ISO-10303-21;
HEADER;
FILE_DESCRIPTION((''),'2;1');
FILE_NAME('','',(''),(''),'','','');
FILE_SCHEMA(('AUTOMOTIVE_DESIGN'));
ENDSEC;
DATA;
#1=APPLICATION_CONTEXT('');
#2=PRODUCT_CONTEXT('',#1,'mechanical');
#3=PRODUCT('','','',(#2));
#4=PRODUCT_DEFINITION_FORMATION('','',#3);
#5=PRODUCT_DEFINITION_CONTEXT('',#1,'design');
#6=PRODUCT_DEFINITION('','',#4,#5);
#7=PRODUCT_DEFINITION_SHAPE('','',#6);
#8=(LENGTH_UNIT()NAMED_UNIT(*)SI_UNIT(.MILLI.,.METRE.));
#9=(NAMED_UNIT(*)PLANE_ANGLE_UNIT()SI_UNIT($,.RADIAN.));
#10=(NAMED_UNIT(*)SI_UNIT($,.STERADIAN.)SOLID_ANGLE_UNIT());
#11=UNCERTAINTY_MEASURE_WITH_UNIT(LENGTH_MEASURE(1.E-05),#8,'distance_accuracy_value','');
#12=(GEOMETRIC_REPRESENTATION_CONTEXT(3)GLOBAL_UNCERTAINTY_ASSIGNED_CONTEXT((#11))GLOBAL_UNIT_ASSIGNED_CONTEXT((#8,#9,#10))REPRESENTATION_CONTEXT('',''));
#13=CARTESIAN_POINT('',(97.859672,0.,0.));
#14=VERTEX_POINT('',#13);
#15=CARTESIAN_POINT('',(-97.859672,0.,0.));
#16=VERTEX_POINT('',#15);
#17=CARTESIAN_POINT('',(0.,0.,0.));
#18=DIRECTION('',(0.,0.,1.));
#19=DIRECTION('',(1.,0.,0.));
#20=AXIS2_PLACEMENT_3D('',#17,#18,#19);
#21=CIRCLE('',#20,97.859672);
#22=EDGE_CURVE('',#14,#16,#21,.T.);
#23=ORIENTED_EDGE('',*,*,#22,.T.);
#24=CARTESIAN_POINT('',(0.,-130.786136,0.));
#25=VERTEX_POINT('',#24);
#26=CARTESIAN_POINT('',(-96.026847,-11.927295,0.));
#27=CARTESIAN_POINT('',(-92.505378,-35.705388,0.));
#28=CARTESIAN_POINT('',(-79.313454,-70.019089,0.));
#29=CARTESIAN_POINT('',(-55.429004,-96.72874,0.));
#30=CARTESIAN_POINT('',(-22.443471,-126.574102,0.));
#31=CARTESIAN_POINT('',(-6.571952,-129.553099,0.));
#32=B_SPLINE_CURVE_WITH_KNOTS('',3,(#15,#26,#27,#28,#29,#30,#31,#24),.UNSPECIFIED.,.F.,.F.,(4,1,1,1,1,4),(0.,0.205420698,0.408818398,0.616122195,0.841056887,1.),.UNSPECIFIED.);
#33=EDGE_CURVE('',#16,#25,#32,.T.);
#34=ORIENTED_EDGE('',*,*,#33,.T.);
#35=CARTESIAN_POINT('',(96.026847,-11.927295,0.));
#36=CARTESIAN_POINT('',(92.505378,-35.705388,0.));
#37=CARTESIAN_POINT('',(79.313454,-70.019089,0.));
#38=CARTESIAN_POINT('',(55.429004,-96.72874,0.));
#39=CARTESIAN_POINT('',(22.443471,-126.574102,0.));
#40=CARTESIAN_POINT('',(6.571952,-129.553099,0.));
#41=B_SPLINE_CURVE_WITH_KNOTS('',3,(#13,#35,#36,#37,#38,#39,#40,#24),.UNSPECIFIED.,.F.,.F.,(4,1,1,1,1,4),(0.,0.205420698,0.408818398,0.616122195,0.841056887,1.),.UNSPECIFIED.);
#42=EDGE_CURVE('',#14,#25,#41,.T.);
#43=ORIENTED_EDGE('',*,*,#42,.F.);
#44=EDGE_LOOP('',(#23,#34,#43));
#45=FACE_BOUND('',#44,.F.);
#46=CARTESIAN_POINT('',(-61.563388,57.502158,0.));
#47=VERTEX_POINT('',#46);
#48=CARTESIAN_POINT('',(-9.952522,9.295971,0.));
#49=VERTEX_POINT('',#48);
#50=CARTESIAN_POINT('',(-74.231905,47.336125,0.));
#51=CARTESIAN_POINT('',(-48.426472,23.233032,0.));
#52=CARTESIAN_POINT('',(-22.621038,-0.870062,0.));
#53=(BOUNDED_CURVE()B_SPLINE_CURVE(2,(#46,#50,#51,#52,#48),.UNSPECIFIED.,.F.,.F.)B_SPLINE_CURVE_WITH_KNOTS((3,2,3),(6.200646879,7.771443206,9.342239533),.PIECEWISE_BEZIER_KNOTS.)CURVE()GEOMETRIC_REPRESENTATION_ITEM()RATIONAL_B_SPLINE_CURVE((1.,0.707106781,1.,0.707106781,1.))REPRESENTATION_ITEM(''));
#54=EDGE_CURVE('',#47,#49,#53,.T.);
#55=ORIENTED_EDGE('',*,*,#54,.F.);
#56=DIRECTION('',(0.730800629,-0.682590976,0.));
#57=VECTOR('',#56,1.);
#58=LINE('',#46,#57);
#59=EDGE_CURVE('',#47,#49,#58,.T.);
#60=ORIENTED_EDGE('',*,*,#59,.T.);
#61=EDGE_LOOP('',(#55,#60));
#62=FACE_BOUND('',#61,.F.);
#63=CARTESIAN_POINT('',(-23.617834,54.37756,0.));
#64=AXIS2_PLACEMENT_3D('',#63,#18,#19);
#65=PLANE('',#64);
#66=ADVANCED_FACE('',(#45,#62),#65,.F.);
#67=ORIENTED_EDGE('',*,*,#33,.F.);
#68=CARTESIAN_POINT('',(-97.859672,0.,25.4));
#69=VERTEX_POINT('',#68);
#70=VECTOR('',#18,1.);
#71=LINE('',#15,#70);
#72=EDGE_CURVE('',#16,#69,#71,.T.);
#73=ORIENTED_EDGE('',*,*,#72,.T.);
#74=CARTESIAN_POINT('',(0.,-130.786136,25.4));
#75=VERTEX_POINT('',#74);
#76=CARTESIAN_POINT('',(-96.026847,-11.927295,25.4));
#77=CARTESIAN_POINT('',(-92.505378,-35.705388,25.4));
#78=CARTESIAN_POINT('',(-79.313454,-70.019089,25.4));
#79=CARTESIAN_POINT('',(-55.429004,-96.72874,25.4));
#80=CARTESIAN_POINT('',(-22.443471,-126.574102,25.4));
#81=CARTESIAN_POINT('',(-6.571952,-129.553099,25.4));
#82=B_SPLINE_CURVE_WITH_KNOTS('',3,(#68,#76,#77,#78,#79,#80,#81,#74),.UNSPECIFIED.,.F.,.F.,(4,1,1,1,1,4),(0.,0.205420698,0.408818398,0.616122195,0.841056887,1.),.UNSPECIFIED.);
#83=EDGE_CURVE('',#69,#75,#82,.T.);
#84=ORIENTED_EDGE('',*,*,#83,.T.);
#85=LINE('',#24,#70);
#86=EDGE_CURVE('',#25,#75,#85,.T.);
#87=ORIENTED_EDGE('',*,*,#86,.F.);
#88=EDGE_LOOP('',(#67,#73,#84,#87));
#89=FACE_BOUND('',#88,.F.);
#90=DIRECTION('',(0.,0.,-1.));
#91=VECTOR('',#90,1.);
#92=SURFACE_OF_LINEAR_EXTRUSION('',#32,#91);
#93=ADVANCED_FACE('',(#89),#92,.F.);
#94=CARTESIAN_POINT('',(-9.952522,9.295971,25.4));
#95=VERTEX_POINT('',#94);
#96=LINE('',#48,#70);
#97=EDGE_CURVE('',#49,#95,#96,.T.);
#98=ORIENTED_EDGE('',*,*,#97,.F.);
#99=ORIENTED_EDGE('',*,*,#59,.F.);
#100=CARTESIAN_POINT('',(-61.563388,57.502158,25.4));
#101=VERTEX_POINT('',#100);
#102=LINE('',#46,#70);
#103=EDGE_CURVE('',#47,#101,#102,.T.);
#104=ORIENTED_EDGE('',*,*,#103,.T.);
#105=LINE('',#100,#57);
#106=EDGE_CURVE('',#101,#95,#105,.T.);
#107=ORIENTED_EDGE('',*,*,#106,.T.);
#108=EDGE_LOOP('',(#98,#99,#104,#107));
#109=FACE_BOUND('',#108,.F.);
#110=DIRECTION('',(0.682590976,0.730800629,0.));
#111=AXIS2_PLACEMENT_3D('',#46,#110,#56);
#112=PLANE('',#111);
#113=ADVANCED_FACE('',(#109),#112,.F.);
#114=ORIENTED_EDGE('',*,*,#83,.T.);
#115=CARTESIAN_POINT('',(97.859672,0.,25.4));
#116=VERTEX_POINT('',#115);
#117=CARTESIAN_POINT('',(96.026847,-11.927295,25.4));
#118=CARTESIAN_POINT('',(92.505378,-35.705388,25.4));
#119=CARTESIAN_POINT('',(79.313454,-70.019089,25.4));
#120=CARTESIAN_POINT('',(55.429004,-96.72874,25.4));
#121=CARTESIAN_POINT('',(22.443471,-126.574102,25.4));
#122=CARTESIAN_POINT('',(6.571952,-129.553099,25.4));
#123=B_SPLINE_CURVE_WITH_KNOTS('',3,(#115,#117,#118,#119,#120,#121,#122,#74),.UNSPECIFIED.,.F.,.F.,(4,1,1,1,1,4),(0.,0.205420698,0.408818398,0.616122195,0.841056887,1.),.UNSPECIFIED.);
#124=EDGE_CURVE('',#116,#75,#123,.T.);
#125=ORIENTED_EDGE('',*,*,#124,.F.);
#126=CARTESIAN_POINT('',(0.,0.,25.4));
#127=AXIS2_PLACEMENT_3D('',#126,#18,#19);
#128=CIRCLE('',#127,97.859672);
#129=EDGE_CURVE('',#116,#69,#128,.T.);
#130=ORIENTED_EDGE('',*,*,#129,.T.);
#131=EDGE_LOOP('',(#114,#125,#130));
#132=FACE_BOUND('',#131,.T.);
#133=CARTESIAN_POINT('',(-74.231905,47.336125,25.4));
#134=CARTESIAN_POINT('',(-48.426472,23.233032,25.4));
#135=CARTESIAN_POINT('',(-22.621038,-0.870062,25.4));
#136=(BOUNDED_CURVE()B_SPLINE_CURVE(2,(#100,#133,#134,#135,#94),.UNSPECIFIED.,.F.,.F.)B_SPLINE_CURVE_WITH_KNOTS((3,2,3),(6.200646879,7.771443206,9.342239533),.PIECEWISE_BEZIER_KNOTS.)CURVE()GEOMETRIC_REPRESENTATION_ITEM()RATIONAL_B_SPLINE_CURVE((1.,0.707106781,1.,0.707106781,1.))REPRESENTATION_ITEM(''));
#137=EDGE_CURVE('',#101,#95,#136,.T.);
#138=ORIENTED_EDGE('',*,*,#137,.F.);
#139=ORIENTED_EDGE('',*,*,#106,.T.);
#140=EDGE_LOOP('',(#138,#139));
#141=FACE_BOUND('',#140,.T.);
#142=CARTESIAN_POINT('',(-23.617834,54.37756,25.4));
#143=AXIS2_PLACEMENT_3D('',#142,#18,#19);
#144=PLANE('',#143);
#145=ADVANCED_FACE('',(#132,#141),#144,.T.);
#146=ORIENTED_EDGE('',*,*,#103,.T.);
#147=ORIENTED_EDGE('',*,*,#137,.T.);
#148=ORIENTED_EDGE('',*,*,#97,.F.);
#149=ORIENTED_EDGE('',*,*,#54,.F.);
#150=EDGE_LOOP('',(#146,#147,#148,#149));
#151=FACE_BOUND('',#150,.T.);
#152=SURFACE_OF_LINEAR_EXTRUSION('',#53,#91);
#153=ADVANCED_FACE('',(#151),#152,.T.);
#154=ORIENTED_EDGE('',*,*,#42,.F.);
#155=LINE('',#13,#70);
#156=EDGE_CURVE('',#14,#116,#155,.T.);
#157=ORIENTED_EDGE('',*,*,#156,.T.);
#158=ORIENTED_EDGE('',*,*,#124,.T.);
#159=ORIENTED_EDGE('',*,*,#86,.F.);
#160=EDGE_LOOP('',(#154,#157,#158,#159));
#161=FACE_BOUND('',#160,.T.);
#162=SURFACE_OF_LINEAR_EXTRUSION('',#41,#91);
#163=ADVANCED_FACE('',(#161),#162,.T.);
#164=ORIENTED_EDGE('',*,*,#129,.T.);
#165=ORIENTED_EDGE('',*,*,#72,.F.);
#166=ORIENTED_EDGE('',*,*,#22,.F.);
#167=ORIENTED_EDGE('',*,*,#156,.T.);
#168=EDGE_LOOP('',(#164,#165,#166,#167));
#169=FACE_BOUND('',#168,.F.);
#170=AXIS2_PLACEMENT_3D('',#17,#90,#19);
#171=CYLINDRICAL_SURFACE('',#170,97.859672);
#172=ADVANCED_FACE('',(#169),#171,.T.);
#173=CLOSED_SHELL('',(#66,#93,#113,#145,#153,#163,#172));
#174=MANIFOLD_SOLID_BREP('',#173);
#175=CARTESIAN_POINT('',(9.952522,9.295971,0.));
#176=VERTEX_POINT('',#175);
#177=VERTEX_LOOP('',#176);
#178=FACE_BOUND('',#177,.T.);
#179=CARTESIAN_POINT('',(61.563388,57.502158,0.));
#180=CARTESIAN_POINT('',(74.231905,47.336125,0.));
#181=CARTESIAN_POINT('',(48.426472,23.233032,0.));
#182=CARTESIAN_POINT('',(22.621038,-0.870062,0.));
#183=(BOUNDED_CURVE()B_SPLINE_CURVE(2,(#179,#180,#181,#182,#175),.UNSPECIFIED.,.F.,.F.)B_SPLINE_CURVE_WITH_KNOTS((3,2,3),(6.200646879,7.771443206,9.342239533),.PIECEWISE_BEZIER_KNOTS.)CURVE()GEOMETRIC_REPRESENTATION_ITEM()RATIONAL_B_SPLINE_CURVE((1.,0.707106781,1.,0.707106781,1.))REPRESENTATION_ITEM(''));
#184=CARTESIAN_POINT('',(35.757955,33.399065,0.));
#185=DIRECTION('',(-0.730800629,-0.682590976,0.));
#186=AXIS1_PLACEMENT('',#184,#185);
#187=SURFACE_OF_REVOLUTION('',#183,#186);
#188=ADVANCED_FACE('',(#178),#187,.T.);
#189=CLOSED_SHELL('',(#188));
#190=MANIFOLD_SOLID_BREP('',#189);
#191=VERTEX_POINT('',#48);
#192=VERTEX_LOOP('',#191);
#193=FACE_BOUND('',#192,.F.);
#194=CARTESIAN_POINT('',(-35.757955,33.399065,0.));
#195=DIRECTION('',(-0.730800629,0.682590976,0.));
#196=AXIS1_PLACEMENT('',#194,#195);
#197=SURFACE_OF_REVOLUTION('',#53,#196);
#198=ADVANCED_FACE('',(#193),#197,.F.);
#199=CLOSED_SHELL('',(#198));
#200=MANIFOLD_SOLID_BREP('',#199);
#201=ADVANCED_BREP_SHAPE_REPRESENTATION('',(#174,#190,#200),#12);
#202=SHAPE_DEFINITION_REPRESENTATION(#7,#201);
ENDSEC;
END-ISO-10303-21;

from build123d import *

# Parameters (mm, degrees)
F3_DEPTH = 25.4


with BuildPart() as f1:
    # F0 (on Top) → F1 (revolve)
    with BuildSketch(Plane.XY):
        with BuildLine():
            Line((-9.9525216629, 9.2959710391), (-61.5633883725, 57.502158223))
            add(Edge.make_bspline(
                [(-61.5633883725, 57.502158223), (-74.2319049125, 47.3361252787), (-48.4264715577, 23.2330316867), (-22.6210382029, -0.8700619052), (-9.9525216629, 9.2959710391)],
                knots=[6.2006468794, 6.2006468794, 6.2006468794, 7.7714432062, 7.7714432062, 9.342239533, 9.342239533, 9.342239533], degree=2, weights=[1, 0.7071067812, 1, 0.7071067812, 1]))
        make_face()
    revolve(axis=Axis((-35.7579550177, 33.399064631, 0), (-0.7308006287, 0.6825909764, 0)))


with BuildPart() as f2_1:
    # F2: instance of F1
    add(f1.part.mirror(Plane.YZ))


with BuildPart() as f3:
    # F0 (on Top) → F3 (new body)
    with BuildSketch(Plane.XY):
        with BuildLine():
            Line((0, 0), (0, 97.8596722921))
            ThreePointArc((0, 97.8596722921), (-38.9850767718, 89.7590065131), (-71.5159100355, 66.7981292621))
            Line((-71.5159100355, 66.7981292621), (-61.5633883725, 57.502158223))
            Line((-61.5633883725, 57.502158223), (-9.9525216629, 9.2959710391))
            Line((-9.9525216629, 9.2959710391), (0, 0))
        make_face()
        with BuildLine():
            ThreePointArc((97.8596722921, 0), (69.1972378824, 69.1972378824), (0, 97.8596722921))
            Line((0, 97.8596722921), (0, 0))
            Line((0, 0), (0, -130.7861357927))
            add(Edge.make_bspline(
                [(97.8596722921, 0), (96.0268468146, -11.9272951744), (92.5053784341, -35.7053882501), (79.3134540192, -70.0190893438), (55.4290042275, -96.7287402044), (22.4434714007, -126.5741021306), (6.5719517026, -129.5530993253), (0, -130.7861357927)],
                knots=[0, 0, 0, 0, 0.2054206984, 0.4088183981, 0.616122195, 0.8410568868, 1, 1, 1, 1], degree=3))
        make_face()
        with BuildLine():
            Line((-61.5633883725, 57.502158223), (-71.5159100355, 66.7981292621))
            ThreePointArc((-71.5159100355, 66.7981292621), (-91.0358143284, 35.9025900276), (-97.8596722921, 0))
            Line((-97.8596722921, 0), (0, 0))
            Line((0, 0), (-9.9525216629, 9.2959710391))
            add(Edge.make_bspline(
                [(-61.5633883725, 57.502158223), (-74.2319049125, 47.3361252787), (-48.4264715577, 23.2330316867), (-22.6210382029, -0.8700619052), (-9.9525216629, 9.2959710391)],
                knots=[6.2006468794, 6.2006468794, 6.2006468794, 7.7714432062, 7.7714432062, 9.342239533, 9.342239533, 9.342239533], degree=2, weights=[1, 0.7071067812, 1, 0.7071067812, 1]))
        make_face()
        with BuildLine():
            Line((0, -130.7861357927), (0, 0))
            Line((0, 0), (-97.8596722921, 0))
            add(Edge.make_bspline(
                [(-97.8596722921, 0), (-96.0268468146, -11.9272951744), (-92.5053784341, -35.7053882501), (-79.3134540192, -70.0190893438), (-55.4290042275, -96.7287402044), (-22.4434714007, -126.5741021306), (-6.5719517026, -129.5530993253), (0, -130.7861357927)],
                knots=[0, 0, 0, 0, 0.2054206984, 0.4088183981, 0.616122195, 0.8410568868, 1, 1, 1, 1], degree=3))
        make_face()
    extrude(amount=F3_DEPTH)


solid = Compound([f1.part, f2_1.part, f3.part])
